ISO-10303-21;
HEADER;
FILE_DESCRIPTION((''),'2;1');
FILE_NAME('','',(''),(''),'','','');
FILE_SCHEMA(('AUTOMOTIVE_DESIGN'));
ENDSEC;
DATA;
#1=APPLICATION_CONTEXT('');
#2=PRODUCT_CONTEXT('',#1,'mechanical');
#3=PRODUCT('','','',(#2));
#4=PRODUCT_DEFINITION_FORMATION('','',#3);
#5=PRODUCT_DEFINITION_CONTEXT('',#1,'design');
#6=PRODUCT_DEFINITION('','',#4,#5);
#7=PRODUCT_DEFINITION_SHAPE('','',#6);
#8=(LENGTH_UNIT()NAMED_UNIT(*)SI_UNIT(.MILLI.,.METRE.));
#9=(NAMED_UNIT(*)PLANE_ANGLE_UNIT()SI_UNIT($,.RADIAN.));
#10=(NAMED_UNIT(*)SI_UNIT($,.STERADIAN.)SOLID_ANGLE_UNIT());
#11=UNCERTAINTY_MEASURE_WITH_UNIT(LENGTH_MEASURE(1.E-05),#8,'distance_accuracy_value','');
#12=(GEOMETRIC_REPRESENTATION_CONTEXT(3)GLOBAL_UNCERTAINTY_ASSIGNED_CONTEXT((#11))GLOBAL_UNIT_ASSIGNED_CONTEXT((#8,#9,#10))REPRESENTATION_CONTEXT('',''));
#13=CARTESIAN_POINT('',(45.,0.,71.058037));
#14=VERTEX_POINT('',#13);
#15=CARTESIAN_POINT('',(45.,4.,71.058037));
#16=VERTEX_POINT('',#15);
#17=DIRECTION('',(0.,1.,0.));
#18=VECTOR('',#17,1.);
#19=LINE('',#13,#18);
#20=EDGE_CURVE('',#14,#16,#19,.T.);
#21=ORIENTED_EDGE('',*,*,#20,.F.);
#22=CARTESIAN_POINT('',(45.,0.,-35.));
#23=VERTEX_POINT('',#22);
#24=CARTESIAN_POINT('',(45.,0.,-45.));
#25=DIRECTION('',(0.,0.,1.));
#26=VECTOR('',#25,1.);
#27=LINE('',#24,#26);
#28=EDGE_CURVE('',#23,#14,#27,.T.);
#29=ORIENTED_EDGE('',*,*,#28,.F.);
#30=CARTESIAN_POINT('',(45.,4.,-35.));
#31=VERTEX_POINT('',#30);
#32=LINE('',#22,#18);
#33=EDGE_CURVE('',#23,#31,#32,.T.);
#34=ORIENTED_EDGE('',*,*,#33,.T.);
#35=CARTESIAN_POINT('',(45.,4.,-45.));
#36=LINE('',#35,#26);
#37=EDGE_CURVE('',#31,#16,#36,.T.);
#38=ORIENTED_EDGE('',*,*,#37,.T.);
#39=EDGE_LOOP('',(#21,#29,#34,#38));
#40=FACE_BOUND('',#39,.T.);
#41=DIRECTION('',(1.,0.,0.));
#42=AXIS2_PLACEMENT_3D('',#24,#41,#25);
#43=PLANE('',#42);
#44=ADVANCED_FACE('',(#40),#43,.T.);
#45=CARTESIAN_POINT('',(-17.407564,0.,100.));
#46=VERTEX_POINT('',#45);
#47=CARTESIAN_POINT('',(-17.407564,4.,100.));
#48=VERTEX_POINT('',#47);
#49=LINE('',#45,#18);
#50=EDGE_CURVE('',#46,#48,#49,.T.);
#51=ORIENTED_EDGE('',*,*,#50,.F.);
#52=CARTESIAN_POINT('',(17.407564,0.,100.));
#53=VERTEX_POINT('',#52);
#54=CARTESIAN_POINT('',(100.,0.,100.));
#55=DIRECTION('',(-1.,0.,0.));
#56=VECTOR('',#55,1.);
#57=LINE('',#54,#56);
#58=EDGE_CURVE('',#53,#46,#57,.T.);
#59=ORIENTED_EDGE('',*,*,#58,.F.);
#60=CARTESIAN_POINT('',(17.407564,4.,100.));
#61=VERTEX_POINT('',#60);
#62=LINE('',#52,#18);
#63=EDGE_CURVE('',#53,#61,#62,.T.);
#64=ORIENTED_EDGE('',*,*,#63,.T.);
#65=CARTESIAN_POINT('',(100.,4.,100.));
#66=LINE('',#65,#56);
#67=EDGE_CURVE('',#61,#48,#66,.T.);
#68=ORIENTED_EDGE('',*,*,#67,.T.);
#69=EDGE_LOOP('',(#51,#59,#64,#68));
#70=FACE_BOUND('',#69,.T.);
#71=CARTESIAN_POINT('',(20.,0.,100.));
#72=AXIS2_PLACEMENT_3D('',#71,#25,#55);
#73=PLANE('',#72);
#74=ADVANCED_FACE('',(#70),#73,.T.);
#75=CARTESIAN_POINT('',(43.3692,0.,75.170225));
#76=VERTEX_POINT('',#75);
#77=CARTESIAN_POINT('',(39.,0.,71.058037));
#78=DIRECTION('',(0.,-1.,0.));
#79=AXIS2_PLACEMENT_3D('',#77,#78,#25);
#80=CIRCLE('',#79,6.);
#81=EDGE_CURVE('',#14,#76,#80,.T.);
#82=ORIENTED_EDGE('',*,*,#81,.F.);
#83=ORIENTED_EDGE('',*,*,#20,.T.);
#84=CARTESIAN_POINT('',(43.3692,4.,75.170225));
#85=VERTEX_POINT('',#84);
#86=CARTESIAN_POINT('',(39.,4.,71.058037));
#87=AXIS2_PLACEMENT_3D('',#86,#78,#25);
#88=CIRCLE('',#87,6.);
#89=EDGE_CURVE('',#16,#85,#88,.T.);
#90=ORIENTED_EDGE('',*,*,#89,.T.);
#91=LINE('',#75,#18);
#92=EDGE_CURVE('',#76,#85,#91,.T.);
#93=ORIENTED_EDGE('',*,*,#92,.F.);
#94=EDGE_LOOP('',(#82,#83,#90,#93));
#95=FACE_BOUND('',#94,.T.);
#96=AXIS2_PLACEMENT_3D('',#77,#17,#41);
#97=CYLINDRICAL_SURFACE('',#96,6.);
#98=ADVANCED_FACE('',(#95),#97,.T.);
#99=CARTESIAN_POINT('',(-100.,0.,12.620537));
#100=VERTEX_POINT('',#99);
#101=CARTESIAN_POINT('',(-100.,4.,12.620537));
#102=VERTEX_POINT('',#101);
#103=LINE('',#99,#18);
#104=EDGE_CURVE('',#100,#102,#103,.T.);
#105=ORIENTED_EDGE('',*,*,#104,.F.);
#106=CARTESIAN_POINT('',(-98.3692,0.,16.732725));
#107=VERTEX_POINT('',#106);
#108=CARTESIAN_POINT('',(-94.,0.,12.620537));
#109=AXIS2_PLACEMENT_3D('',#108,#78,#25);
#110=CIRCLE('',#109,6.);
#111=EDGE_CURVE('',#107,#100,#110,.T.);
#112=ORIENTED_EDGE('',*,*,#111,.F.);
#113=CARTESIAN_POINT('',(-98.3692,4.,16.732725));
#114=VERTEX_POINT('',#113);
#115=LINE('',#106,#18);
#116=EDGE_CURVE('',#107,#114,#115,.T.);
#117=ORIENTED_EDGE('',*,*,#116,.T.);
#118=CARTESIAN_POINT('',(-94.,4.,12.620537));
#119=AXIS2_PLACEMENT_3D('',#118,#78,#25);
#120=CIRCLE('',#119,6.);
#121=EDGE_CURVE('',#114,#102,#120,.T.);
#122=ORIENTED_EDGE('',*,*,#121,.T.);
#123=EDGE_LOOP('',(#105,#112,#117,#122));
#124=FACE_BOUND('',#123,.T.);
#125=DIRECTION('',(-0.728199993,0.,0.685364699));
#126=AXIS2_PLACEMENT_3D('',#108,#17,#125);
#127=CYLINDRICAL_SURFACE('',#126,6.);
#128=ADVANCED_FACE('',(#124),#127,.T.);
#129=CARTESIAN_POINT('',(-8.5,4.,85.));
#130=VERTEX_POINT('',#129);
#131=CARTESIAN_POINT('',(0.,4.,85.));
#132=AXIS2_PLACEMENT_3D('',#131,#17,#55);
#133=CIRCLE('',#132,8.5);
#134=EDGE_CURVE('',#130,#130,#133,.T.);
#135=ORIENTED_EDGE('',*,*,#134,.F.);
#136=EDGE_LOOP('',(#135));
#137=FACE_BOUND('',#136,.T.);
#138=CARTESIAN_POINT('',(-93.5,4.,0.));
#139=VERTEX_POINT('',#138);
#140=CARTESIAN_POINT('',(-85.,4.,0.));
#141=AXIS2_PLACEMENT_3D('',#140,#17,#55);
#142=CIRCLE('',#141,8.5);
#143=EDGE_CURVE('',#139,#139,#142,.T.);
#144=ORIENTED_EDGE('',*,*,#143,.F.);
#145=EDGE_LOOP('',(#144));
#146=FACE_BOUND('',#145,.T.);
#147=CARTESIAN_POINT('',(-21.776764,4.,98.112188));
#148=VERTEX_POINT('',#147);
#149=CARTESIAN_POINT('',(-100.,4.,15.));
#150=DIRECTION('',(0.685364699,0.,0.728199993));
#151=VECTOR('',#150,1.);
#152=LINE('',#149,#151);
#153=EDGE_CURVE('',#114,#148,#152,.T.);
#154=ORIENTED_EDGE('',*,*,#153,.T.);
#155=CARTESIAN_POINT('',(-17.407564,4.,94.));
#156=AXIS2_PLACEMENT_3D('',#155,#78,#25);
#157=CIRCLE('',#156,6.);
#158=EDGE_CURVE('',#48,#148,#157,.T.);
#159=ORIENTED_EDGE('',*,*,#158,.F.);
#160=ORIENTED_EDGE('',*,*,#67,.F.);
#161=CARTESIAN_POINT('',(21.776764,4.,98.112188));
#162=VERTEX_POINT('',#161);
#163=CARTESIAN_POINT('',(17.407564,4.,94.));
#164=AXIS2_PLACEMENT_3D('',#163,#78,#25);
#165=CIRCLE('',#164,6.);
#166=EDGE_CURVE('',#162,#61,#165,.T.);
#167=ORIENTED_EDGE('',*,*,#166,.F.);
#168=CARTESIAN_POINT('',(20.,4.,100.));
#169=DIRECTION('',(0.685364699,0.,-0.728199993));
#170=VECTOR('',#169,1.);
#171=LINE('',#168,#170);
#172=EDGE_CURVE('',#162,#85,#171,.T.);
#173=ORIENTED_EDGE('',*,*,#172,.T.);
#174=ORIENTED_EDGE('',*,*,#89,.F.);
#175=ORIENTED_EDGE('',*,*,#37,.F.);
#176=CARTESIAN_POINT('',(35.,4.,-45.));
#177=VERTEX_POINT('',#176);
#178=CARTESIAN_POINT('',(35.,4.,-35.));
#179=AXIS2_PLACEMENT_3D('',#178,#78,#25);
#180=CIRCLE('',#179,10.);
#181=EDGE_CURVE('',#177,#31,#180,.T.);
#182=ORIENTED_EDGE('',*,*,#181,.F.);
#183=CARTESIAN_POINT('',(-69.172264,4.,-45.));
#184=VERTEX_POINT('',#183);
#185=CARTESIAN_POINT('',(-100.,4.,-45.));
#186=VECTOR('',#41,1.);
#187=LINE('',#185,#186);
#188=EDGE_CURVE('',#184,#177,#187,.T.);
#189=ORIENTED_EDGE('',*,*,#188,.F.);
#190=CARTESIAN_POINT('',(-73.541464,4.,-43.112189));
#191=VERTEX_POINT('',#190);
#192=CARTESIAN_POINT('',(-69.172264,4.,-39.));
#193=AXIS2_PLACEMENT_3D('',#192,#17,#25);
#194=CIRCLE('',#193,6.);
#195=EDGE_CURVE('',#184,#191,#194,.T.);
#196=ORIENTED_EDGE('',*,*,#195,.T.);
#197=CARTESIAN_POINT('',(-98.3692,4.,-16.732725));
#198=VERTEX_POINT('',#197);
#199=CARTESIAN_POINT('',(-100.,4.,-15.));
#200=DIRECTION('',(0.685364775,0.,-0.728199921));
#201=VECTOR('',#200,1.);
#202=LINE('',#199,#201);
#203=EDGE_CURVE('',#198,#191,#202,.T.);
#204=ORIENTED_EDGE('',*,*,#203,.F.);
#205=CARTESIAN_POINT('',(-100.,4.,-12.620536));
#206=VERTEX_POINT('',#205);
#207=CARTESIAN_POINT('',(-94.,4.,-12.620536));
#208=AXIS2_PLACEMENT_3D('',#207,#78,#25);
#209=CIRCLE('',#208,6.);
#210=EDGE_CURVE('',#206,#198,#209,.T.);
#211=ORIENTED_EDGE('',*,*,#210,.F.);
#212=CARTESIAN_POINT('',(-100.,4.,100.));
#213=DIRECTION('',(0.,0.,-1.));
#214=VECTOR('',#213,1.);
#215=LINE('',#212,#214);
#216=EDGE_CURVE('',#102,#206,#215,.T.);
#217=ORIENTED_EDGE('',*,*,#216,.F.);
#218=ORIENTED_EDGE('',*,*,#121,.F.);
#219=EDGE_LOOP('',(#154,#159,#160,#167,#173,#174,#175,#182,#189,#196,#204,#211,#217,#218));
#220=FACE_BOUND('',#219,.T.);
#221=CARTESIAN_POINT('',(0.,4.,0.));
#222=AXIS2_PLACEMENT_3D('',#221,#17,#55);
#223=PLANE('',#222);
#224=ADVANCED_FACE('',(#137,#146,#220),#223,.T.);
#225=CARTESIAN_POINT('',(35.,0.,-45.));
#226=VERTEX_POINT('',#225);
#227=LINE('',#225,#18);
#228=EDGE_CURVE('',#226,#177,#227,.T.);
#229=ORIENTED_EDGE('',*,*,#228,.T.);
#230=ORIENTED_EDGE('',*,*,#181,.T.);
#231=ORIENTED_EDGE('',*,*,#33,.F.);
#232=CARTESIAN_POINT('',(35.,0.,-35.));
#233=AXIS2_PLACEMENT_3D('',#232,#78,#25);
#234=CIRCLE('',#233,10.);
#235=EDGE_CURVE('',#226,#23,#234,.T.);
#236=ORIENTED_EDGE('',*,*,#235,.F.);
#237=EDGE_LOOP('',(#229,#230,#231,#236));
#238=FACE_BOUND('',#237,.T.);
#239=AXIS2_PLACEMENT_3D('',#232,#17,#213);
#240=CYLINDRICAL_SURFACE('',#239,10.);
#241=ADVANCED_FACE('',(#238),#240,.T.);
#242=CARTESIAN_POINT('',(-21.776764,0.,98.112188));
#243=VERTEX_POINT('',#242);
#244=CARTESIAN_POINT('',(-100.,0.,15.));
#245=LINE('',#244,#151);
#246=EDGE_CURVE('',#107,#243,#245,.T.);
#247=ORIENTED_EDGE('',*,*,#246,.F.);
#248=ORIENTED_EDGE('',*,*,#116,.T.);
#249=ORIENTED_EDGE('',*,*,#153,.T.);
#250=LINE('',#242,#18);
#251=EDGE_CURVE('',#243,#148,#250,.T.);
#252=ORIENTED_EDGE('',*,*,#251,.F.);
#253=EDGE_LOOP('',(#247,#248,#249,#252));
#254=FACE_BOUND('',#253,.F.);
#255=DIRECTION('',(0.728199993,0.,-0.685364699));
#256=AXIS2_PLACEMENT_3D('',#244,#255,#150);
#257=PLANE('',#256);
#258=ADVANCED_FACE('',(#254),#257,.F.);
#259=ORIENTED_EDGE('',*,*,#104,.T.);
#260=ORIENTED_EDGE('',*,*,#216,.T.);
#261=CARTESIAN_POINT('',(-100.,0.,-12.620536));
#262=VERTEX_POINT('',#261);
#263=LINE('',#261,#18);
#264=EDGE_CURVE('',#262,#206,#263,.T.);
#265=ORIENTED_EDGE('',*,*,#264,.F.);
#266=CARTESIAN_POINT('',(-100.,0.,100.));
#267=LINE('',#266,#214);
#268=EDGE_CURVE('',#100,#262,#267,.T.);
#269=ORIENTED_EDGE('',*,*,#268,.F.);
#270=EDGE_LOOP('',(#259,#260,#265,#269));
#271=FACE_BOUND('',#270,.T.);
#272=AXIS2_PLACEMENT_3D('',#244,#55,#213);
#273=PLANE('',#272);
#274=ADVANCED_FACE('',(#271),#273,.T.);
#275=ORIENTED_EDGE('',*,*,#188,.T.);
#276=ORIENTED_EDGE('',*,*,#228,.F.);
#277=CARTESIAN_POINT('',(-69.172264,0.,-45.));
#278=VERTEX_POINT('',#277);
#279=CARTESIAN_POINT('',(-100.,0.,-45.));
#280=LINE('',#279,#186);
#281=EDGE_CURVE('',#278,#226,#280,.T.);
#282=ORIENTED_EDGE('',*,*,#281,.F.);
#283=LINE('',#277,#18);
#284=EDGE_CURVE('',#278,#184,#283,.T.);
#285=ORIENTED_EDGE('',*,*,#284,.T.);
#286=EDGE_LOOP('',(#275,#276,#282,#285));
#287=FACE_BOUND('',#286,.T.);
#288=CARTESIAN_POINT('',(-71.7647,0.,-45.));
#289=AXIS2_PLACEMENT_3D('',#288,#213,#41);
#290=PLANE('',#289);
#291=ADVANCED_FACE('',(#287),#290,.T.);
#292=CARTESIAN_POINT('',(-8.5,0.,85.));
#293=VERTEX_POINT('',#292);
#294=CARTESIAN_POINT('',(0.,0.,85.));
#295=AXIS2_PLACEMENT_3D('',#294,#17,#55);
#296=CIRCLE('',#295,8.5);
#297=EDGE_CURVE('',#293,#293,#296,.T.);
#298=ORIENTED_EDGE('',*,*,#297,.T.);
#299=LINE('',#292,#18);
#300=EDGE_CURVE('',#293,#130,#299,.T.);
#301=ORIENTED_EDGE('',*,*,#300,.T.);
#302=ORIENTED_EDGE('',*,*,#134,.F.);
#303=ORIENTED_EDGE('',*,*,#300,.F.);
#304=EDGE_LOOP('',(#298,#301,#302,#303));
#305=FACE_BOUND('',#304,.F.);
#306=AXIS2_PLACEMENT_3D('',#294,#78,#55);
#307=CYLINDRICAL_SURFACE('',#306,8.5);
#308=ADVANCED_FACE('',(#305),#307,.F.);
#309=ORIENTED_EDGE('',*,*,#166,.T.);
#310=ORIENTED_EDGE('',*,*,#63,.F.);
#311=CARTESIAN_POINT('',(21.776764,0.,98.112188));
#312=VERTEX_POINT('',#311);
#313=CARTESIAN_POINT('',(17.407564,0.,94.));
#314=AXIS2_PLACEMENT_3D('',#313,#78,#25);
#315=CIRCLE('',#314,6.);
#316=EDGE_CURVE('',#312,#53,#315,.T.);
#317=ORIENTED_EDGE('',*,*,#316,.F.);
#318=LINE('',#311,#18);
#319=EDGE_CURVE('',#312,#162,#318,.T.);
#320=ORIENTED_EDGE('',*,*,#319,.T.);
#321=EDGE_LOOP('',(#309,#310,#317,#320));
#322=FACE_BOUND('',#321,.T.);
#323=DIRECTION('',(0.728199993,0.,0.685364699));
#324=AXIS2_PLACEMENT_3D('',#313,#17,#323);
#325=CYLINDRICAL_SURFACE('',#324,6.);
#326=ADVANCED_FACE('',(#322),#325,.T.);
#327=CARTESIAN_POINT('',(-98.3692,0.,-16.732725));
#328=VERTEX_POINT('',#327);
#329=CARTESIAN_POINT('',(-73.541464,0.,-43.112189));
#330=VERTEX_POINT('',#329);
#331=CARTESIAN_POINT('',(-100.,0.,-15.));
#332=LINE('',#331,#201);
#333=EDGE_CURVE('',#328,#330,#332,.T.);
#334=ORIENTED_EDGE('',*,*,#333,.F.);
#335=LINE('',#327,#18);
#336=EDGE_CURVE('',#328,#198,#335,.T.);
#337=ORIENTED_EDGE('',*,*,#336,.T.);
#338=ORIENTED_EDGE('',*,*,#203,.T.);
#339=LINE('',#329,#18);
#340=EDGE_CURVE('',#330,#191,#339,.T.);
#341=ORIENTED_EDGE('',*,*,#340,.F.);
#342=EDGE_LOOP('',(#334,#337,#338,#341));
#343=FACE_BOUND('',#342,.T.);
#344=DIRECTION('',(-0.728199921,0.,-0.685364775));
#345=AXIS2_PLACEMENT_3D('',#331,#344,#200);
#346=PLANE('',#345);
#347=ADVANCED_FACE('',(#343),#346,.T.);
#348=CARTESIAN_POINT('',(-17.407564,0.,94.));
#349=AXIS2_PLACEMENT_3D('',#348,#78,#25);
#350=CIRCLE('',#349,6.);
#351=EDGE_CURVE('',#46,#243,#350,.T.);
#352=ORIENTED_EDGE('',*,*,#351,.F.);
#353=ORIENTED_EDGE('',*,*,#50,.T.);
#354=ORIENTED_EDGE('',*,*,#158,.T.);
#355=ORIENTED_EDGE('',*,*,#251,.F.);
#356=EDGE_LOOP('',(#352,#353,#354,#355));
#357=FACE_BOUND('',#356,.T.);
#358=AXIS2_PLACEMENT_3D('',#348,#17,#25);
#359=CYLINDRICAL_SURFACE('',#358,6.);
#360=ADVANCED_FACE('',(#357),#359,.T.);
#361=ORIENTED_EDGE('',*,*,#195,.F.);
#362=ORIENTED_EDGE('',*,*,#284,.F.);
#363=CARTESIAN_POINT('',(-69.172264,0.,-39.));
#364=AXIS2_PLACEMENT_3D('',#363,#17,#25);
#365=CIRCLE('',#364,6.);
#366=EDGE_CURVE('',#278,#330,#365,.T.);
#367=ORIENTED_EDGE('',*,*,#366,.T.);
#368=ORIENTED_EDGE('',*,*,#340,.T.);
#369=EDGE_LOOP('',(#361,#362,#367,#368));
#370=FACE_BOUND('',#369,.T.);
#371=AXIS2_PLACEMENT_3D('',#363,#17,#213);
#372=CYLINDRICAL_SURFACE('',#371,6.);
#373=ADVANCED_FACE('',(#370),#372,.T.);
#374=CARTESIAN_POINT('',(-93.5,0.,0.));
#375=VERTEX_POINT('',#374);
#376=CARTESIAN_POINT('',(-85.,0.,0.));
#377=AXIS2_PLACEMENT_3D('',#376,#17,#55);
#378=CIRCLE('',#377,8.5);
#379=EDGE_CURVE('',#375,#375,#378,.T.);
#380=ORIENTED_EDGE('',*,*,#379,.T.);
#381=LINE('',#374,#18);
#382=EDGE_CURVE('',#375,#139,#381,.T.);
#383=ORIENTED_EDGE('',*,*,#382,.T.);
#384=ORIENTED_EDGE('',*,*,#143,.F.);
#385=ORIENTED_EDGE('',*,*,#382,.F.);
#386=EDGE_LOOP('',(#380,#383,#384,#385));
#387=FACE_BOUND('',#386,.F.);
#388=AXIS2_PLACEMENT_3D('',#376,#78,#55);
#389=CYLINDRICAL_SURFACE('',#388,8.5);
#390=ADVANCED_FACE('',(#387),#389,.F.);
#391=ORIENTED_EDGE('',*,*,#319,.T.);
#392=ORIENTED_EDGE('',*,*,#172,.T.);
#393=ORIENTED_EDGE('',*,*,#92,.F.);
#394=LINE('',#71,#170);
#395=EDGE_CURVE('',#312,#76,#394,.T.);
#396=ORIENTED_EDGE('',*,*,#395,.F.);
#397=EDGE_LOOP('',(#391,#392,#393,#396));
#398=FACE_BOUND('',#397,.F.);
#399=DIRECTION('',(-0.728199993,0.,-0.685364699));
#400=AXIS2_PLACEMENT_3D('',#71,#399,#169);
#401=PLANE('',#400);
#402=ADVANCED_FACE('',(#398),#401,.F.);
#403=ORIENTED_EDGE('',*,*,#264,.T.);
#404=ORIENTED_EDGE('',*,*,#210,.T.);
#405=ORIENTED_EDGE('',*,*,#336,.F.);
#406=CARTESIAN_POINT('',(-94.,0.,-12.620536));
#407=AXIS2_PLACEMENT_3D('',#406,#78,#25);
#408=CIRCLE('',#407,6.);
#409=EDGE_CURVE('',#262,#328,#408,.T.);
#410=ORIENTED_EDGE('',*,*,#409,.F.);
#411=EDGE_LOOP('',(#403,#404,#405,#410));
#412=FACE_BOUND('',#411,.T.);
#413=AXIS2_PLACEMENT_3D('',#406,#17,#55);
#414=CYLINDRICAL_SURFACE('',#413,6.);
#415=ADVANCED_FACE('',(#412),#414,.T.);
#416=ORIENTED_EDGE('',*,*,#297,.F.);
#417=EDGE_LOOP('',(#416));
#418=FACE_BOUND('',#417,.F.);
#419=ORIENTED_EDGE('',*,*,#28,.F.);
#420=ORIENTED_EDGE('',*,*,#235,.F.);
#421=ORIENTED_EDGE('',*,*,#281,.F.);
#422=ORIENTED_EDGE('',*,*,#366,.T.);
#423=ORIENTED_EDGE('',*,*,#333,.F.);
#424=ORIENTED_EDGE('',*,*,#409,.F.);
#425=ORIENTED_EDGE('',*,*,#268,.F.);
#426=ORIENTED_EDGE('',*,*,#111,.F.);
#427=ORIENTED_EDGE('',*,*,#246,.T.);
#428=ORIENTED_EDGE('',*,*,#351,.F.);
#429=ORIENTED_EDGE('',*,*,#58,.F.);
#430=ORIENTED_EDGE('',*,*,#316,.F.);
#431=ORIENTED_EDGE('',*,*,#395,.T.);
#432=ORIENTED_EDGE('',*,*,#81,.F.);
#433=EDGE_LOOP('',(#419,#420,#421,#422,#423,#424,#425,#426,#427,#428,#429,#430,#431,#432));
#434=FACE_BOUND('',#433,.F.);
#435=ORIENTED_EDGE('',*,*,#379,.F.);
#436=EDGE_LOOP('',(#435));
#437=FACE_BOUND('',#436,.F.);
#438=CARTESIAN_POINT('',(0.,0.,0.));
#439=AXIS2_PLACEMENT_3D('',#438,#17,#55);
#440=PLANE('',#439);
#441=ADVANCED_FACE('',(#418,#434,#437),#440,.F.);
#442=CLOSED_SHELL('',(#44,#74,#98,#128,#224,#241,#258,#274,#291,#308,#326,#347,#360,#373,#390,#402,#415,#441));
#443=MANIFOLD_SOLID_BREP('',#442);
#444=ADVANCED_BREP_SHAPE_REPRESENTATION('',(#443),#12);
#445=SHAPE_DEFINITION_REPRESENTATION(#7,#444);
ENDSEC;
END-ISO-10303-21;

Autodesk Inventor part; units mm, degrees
ref_plane "YZ Plane" through (0, 0, 0) normal (1, 0, 0) x (0, 1, 0)
ref_plane "XZ Plane" through (0, 0, 0) normal (0, 1, 0) x (-1, 0, 0)
ref_plane "XY Plane" through (0, 0, 0) normal (0, 0, 1) x (1, 0, 0)
sketch "Sketch1" plane through (0, 0, 0) normal (0, 1, 0) x (-1, 0, 0)
  line L0 (40, 40) -> (-40, 40) construction
  line L1 (-40, 40) -> (-40, -40) construction
  line L2 (-40, -40) -> (40, -40) construction
  line L3 (40, -40) -> (40, 40) construction
  line L4 (-40, 40) -> (40, -40) construction
  line L5 (100, -45) -> (-100, -45)
  line L6 (-100, -45) -> (-100, 100)
  line L7 (-100, 100) -> (100, 100)
  line L8 (100, 100) -> (100, -45)
  circle A0 centre (85, 0) radius 8.5
  circle A1 centre (0, 85) radius 8.5
  circle A2 centre (-85, 0) radius 8.5
  line L9 (0, 40) -> (0, -40) construction
  line L10 (100, 15) -> (20, 100)
  line L11 (-20, 100) -> (-100, 15)
  line L12 (100, -15) -> (71.7647, -45)
  line L13 (-100, -15) -> (-71.7647, -45)
  line L14 (0, 0) -> (-40, 0) construction
  line L15 (-45, -45) -> (-45, 73.4375)
  point P0 (0, 0)
  point P1 (0, 0)
  dimension "d2" = 80
  dimension "d3" = 80
  dimension "d17" = 5
  dimension "d18" = 17
  dimension "d19" = 45
  dimension "d20" = 45
  dimension "d21" = 40
  dimension "d22" = 15
  dimension "d23" = 15
  dimension "d24" = 30
  dimension "d26" = 5
extrude "Plate1" add sketch "Sketch1" along normal blind 4 contours L5 L15 L11 L7 L10 L8 L12
fillet "Corner Round2" radius 6 6 edges at (-20, 2, 100) (20, 2, 100) (-100, 2, 15) (-100, 2, -15) (-71.7647, 2, -45) (45, 2, 73.4375)
fillet "Corner Round4" radius 10 1 edges at (45, 2, -45)
equation "\"d20\" = d19"
equation "\"d23\" = d22"
equation "\"d26\" = d17"
equation "\"d6\" = Thickness"
equation "\"BendReliefWidth\" = Thickness"
equation "\"BendReliefDepth\" = 0.5 * Thickness"
equation "\"CornerReliefSize\" = 4 * Thickness"
equation "\"MinimumRemnant\" = 2 * Thickness"
equation "\"TransitionRadius\" = BendRadius"
equation "\"JacobiRadiusSize\" = BendRadius"
equation "\"GapSize\" = Thickness"
equation "\"Thickness\" = 4"
equation "\"BendRadius\" = 6"
properties part number "MSC 902 FLANGE FRAME HEEL" material "Stainless Steel"
